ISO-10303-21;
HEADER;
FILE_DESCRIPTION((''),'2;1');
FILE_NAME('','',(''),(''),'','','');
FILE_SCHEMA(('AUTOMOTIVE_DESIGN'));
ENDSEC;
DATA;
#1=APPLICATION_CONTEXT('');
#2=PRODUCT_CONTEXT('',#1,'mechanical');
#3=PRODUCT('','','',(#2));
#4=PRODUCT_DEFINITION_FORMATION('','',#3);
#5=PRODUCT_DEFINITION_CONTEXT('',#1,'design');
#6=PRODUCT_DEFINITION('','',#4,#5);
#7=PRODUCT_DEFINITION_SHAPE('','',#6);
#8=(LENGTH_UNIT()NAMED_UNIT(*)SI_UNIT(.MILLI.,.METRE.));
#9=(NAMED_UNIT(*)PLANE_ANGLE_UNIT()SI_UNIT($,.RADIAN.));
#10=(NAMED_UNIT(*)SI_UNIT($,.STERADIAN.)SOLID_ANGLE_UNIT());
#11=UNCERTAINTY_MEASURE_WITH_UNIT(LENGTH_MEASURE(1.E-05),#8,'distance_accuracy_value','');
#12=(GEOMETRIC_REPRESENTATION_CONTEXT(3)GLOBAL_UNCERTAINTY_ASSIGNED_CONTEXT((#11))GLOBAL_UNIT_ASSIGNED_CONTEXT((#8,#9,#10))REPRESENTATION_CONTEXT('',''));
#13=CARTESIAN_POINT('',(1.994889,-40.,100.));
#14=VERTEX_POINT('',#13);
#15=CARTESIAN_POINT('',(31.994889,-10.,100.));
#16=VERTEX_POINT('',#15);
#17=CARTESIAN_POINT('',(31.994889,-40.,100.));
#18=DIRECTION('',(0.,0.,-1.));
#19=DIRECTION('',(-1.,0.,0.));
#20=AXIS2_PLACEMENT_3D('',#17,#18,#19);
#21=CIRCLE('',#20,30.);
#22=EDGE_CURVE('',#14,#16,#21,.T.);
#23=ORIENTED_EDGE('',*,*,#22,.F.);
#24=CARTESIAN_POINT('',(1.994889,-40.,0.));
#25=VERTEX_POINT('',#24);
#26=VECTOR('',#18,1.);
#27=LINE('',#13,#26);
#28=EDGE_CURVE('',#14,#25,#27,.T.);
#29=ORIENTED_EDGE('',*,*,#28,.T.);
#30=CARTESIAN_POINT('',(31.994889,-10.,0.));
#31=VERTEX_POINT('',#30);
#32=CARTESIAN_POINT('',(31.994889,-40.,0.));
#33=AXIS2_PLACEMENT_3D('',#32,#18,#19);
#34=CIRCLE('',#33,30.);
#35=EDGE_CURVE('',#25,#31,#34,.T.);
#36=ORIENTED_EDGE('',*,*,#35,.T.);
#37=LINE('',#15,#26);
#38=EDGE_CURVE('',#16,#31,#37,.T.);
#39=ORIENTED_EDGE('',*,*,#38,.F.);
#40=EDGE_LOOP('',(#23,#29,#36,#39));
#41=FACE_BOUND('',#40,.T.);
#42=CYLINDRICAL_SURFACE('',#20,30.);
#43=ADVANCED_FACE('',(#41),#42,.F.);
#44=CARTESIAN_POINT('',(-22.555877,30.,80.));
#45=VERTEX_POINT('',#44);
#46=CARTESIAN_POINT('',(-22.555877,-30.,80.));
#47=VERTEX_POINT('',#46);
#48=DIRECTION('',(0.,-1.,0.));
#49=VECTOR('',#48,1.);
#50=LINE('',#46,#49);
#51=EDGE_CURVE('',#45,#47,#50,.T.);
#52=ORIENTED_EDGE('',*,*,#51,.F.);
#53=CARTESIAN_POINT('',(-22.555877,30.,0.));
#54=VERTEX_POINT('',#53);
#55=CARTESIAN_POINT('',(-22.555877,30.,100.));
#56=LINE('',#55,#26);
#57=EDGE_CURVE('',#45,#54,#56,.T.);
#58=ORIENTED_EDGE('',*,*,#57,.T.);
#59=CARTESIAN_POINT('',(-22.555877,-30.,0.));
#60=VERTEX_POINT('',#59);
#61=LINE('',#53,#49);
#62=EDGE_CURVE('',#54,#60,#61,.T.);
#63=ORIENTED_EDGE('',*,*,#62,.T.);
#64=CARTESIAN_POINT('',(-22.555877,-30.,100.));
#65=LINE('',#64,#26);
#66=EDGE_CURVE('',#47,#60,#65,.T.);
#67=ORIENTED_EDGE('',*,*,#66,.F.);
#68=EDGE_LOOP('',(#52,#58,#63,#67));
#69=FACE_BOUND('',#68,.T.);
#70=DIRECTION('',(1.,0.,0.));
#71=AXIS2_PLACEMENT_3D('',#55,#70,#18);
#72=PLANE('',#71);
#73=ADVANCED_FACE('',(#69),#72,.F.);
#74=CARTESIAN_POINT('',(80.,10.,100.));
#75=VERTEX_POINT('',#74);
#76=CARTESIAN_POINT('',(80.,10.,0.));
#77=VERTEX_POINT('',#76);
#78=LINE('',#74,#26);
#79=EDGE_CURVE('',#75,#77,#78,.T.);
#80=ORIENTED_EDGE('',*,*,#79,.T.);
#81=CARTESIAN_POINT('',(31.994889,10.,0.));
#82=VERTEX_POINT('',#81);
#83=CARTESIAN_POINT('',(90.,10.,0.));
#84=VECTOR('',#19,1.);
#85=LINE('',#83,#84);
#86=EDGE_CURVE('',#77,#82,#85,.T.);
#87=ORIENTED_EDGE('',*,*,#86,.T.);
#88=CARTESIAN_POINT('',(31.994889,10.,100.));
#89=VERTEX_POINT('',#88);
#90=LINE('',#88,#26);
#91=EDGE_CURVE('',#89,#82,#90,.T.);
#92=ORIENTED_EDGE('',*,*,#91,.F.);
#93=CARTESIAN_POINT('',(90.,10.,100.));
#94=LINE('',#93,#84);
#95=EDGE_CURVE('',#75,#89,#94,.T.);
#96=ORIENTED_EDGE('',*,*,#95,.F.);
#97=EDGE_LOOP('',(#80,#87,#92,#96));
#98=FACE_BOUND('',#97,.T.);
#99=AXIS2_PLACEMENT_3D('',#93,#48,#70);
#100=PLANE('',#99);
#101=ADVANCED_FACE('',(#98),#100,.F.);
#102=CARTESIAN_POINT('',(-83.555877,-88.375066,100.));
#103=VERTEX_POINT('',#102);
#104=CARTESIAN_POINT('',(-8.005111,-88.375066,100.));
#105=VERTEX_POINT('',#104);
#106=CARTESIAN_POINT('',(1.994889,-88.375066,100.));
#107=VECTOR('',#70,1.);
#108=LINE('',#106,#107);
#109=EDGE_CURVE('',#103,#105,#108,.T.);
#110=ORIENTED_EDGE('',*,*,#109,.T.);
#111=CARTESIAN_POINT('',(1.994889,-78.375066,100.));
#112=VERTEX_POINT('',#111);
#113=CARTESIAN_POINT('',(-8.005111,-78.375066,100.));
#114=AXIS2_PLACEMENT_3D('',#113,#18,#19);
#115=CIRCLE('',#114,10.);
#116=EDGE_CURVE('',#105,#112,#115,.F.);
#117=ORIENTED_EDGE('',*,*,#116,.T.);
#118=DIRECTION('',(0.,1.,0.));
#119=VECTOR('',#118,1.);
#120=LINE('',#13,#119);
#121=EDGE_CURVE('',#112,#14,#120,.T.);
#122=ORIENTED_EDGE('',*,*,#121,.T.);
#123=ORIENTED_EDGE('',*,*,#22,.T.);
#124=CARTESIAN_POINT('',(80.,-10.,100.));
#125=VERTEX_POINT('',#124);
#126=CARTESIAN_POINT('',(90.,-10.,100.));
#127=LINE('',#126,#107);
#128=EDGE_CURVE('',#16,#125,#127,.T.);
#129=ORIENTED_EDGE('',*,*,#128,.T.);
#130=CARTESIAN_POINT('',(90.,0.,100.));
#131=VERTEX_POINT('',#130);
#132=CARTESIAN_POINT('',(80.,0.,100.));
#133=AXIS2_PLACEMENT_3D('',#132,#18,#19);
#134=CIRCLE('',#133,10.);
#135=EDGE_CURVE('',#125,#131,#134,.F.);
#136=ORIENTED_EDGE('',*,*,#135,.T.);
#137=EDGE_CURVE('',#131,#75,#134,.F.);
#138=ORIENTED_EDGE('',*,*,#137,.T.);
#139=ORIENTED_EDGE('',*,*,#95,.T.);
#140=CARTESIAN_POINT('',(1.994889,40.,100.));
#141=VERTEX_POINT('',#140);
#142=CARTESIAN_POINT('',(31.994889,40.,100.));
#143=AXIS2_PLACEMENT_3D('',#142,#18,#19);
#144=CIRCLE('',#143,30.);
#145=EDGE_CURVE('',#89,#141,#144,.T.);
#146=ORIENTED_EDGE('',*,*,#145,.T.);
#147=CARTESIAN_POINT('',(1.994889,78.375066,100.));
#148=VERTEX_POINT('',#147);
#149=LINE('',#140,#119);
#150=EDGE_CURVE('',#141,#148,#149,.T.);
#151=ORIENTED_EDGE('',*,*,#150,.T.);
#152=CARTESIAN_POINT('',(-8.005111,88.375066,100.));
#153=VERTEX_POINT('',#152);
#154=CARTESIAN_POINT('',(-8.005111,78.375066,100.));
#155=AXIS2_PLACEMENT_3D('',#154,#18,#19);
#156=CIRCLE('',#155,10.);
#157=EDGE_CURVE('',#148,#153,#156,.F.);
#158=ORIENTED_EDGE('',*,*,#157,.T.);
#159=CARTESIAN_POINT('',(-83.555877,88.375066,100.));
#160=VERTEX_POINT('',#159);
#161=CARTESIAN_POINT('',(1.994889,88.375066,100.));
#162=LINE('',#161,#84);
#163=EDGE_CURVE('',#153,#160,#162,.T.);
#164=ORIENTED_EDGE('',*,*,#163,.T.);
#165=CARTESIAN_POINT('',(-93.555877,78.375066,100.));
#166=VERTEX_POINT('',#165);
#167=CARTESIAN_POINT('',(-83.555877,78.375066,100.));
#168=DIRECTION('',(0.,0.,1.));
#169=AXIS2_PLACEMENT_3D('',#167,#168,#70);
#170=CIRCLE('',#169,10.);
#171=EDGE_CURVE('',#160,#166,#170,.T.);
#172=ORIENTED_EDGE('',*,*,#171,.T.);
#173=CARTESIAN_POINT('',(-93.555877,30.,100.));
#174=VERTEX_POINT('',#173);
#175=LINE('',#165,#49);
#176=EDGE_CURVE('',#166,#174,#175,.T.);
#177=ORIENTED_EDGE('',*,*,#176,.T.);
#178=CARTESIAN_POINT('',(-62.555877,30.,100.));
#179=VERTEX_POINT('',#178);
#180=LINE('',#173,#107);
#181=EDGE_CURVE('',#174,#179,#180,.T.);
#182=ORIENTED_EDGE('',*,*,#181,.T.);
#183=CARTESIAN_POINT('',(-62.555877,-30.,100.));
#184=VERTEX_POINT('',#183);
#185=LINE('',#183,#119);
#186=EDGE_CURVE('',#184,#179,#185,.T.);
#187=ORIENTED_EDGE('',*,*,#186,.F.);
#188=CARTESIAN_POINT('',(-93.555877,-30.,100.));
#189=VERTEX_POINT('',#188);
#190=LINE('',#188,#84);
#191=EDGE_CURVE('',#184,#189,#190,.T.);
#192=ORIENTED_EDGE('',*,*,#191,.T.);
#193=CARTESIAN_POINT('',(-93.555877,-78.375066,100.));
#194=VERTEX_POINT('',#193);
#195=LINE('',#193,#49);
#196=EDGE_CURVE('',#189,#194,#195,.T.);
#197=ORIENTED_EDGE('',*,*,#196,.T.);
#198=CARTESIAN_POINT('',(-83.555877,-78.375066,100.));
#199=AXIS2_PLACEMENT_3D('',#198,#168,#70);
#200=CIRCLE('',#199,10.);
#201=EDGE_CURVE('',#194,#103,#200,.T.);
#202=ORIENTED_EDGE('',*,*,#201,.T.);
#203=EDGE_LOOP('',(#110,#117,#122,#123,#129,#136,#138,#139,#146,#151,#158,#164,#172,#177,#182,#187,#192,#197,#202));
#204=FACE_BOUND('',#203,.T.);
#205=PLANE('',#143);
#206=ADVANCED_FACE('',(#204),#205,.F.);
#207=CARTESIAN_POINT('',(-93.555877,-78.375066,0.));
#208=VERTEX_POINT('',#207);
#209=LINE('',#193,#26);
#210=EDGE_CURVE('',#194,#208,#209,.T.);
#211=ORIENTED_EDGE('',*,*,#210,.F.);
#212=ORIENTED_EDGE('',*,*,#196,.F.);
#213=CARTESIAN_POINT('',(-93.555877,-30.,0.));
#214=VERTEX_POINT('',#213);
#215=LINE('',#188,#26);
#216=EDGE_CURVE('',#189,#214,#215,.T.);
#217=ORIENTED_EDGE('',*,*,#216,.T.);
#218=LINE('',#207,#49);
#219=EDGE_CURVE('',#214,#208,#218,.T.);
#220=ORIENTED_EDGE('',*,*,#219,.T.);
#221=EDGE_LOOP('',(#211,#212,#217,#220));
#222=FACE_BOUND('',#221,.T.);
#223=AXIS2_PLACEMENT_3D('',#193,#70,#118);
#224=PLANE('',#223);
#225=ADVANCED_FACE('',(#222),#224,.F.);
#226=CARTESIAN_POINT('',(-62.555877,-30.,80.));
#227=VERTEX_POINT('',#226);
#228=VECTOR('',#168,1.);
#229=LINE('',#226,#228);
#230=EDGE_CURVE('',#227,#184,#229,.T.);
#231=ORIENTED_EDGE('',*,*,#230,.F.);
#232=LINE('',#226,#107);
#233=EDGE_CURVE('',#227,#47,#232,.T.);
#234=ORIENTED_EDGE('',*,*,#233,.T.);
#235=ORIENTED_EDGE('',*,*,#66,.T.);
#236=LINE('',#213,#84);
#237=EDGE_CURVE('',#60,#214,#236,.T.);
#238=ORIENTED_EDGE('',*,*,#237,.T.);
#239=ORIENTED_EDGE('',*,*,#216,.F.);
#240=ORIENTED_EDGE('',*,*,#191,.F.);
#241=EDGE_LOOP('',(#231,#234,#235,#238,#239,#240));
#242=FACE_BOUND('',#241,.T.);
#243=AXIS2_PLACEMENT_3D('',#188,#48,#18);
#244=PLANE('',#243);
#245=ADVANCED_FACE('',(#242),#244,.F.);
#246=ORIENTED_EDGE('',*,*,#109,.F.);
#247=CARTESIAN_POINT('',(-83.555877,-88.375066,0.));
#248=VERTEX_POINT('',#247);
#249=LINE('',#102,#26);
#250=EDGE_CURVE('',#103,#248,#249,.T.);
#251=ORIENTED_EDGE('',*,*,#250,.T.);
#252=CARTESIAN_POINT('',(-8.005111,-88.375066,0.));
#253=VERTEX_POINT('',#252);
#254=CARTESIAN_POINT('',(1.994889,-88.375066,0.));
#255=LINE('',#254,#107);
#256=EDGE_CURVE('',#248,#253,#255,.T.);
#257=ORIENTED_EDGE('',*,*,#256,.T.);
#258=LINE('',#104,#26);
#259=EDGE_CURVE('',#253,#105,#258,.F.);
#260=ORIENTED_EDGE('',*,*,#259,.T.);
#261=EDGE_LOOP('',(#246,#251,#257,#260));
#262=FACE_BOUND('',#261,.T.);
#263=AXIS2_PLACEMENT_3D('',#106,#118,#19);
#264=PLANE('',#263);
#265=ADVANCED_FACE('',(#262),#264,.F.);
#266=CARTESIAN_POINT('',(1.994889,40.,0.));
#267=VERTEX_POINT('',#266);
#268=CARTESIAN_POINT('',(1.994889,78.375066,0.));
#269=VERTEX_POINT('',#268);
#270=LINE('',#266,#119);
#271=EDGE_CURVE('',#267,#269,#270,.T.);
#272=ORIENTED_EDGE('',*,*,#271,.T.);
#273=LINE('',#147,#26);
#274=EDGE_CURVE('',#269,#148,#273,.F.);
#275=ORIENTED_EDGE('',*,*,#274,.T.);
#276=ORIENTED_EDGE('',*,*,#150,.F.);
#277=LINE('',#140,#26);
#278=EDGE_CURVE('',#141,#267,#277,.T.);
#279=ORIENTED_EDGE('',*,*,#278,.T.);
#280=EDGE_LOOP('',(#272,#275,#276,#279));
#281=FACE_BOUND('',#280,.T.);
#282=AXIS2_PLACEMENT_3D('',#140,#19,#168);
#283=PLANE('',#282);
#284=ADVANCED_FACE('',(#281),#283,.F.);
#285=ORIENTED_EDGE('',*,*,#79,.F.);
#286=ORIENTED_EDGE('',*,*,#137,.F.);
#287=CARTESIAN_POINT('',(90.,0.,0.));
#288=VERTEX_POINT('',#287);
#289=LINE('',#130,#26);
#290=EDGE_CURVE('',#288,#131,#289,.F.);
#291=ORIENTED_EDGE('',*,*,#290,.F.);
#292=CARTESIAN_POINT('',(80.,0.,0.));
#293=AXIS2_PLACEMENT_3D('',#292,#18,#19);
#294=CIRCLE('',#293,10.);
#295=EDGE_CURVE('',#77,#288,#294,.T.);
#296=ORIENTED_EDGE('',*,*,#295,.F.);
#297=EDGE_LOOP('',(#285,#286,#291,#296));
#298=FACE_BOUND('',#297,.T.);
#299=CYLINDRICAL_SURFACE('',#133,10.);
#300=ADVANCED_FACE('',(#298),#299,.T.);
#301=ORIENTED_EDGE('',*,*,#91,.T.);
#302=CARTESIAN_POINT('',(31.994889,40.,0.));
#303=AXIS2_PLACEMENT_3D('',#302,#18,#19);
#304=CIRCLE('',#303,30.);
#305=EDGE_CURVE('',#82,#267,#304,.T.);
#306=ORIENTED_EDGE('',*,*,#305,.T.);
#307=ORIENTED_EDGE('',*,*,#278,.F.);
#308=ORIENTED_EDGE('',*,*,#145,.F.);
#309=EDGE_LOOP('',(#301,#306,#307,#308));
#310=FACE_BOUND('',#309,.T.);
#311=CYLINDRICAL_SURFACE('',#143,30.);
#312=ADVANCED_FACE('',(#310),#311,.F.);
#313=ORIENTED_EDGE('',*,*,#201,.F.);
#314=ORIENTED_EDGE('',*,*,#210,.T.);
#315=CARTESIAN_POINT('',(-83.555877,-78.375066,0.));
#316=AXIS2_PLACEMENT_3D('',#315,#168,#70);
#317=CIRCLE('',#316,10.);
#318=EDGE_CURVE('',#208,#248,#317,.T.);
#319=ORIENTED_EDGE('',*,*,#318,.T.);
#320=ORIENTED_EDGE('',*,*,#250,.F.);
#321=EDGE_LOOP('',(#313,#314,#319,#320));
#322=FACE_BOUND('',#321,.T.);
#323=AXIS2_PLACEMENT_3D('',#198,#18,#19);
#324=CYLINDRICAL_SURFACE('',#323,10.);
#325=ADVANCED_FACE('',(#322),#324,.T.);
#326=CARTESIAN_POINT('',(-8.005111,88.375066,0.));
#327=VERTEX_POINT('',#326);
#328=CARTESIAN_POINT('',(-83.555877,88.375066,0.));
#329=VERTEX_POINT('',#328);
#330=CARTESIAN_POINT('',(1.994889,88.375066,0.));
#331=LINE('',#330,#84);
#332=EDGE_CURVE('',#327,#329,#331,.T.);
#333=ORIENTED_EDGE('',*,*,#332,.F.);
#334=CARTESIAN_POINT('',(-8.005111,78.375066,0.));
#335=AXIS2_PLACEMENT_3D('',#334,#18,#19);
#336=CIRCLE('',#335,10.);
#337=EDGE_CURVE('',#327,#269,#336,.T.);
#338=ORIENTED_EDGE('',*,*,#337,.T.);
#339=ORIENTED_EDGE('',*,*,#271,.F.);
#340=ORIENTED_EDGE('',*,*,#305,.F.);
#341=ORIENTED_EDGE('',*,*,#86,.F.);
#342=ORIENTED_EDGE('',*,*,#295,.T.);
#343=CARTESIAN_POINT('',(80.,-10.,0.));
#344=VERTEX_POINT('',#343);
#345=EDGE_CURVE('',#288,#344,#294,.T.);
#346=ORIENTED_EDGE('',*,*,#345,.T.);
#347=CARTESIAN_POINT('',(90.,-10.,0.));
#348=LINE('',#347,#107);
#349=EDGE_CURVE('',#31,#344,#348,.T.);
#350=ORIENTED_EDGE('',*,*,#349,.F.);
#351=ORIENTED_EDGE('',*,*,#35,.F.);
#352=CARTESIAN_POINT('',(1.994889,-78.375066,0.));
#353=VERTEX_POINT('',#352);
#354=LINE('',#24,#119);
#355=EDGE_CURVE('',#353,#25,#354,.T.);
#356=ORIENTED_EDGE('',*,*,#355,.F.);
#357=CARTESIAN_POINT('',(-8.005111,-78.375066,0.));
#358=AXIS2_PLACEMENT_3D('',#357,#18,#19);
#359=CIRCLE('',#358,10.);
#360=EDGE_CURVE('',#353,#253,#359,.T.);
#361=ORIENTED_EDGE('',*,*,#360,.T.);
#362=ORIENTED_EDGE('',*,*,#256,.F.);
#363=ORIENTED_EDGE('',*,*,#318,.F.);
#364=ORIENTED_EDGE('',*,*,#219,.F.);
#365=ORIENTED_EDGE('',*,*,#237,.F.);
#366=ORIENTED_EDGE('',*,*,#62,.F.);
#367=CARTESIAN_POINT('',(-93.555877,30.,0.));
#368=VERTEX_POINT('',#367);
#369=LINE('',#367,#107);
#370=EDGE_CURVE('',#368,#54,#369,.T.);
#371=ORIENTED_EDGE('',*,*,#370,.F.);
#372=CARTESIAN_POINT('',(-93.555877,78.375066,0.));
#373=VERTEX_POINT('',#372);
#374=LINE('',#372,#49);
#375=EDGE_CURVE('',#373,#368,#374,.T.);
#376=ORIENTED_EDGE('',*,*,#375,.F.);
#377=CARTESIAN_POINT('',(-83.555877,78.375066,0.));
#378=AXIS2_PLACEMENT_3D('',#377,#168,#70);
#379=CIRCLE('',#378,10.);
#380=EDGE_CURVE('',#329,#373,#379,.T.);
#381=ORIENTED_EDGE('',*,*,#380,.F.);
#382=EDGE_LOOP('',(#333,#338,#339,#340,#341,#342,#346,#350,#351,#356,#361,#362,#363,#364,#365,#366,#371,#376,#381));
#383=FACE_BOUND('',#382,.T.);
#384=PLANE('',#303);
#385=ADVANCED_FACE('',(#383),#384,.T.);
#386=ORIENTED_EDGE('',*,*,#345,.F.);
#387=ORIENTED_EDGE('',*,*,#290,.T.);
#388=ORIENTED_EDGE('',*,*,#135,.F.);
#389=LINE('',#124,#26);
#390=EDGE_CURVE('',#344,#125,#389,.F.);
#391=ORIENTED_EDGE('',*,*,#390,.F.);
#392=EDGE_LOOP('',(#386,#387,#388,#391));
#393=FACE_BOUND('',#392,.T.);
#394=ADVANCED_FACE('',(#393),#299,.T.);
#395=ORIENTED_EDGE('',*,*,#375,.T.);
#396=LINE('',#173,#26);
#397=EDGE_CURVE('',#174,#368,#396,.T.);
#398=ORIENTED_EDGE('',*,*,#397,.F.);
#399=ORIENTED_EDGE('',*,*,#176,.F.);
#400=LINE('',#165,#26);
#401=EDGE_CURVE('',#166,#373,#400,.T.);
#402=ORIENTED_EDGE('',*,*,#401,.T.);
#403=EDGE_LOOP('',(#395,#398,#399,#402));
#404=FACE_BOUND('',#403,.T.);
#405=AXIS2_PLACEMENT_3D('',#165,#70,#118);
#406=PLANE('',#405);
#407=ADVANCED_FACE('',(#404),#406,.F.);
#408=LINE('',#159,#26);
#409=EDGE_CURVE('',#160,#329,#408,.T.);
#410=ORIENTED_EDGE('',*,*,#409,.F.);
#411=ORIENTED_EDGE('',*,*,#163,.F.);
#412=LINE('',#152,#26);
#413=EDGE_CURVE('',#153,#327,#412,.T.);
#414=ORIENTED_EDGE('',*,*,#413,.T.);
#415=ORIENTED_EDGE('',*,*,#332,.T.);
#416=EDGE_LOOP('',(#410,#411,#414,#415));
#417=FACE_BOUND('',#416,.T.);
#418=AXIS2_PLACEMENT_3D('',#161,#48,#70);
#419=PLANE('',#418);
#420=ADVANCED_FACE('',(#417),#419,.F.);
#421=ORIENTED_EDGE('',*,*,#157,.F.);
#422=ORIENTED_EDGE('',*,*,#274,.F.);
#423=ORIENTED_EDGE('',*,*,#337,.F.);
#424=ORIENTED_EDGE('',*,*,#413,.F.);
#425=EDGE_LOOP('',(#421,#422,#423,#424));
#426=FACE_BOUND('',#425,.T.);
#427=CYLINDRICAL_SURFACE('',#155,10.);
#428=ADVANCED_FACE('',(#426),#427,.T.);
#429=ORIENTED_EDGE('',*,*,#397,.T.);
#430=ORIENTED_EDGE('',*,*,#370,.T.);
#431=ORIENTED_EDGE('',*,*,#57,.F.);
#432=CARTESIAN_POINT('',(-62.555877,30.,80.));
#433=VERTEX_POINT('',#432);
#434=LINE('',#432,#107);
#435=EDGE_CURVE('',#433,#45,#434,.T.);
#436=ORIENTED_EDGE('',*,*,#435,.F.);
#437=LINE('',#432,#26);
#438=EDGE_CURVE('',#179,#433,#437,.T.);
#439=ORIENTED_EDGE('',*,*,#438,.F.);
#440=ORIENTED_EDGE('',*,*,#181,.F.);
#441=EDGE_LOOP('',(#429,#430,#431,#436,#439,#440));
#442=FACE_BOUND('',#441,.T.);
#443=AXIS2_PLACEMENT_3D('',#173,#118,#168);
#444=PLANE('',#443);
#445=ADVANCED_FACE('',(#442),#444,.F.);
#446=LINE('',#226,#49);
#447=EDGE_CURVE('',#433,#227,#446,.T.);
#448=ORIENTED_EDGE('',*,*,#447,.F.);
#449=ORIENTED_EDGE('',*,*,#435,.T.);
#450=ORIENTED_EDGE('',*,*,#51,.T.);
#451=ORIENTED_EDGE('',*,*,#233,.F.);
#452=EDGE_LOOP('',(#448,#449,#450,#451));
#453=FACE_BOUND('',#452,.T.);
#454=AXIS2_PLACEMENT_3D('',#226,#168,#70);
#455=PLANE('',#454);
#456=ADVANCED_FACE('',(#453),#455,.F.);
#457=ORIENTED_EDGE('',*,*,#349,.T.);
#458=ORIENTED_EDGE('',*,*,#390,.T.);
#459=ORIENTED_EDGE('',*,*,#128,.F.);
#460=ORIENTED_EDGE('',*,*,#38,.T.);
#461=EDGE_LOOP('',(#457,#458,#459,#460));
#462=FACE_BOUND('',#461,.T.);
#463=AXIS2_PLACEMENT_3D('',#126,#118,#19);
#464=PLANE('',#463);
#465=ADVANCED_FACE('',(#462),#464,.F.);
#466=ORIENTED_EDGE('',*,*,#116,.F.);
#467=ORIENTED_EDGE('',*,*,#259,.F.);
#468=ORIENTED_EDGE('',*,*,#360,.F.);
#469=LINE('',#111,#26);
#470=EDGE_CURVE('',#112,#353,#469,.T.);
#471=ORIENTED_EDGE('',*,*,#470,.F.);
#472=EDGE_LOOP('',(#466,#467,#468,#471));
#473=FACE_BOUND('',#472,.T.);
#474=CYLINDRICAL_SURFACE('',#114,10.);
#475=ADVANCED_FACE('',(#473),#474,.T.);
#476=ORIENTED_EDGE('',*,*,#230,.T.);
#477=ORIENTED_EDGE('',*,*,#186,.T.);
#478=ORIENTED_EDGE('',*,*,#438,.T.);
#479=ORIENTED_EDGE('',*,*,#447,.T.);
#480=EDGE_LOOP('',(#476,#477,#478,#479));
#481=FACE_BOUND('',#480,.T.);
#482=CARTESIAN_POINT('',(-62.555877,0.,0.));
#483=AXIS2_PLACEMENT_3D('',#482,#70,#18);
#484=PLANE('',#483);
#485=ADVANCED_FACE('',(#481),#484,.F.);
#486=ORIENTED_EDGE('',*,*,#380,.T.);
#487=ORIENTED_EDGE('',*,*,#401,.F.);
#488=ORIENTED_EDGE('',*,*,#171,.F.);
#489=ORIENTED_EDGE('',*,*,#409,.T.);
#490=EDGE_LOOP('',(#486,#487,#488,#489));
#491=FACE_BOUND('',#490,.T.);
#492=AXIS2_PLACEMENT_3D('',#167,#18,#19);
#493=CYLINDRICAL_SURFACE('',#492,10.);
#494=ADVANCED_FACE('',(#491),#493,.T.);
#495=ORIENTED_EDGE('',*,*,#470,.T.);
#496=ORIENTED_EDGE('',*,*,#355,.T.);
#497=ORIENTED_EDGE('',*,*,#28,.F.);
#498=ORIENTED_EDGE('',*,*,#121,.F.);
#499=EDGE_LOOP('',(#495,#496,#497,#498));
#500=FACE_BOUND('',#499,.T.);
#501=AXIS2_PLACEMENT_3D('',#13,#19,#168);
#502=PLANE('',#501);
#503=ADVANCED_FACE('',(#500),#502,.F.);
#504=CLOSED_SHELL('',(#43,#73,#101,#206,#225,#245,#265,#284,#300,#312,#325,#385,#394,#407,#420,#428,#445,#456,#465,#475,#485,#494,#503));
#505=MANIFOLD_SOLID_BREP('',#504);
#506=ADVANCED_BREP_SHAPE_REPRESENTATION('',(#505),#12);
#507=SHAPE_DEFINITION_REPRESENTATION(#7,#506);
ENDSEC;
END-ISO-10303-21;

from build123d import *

# Parameters (mm, degrees)
BOSS_EXTRU_1_DEPTH = 100
ESQUISSE2_W        = 20
ESQUISSE2_H        = 60
BOSS_EXTRU_2_DEPTH = 40
CONG_1_R           = 10
CONG_2_R           = 10
CONG_3_R           = 10


with BuildPart() as part:
    # Esquisse1 → Boss.-Extru.1 (new body)
    with BuildSketch(Plane.XY):
        with BuildLine():
            Line((90, -10), (90, 10))
            Line((90, 10), (31.994888516, 10))
            ThreePointArc((31.994888516, 10), (10.78168508, 18.786796564), (1.994888516, 40))
            Line((1.994888516, 40), (1.994888516, 88.375065612))
            Line((1.994888516, 88.375065612), (-83.555876775, 88.375065612))
            ThreePointArc((-83.555876775, 88.375065612), (-90.626944587, 85.446133424), (-93.555876775, 78.375065612))
            Line((-93.555876775, 78.375065612), (-93.555876775, 30))
            Line((-93.555876775, 30), (-22.555876775, 30))
            Line((-22.555876775, 30), (-22.555876775, -30))
            Line((-22.555876775, -30), (-93.555876775, -30))
            Line((-93.555876775, -30), (-93.555876775, -78.375065612))
            ThreePointArc((-93.555876775, -78.375065612), (-90.626944587, -85.446133424), (-83.555876775, -88.375065612))
            Line((-83.555876775, -88.375065612), (1.994888516, -88.375065612))
            Line((1.994888516, -88.375065612), (1.994888516, -40))
            ThreePointArc((1.994888516, -40), (10.78168508, -18.786796564), (31.994888516, -10))
            Line((31.994888516, -10), (90, -10))
        make_face()
    extrude(amount=BOSS_EXTRU_1_DEPTH)

    # Esquisse2 → Boss.-Extru.2 (add)
    with BuildSketch(Plane.ZY.offset(22.555876775)):
        with Locations((90, 0)):
            Rectangle(ESQUISSE2_W, ESQUISSE2_H)
    extrude(amount=BOSS_EXTRU_2_DEPTH)

    # Congé1
    cong_1_edges = [part.edges().sort_by_distance(p)[0] for p in [
        (1.994888516, -88.375065612, 50),
    ]]
    fillet(cong_1_edges, radius=CONG_1_R)

    # Congé2
    cong_2_edges = [part.edges().sort_by_distance(p)[0] for p in [
        (1.994888516, 88.375065612, 50),
    ]]
    fillet(cong_2_edges, radius=CONG_2_R)

    # Congé3
    cong_3_edges = [part.edges().sort_by_distance(p)[0] for p in [
        (90, -10, 50),
        (90, 10, 50),
    ]]
    fillet(cong_3_edges, radius=CONG_3_R - 0.0001)  # a hair under: the kernel refuses the full size


solid = part.part
